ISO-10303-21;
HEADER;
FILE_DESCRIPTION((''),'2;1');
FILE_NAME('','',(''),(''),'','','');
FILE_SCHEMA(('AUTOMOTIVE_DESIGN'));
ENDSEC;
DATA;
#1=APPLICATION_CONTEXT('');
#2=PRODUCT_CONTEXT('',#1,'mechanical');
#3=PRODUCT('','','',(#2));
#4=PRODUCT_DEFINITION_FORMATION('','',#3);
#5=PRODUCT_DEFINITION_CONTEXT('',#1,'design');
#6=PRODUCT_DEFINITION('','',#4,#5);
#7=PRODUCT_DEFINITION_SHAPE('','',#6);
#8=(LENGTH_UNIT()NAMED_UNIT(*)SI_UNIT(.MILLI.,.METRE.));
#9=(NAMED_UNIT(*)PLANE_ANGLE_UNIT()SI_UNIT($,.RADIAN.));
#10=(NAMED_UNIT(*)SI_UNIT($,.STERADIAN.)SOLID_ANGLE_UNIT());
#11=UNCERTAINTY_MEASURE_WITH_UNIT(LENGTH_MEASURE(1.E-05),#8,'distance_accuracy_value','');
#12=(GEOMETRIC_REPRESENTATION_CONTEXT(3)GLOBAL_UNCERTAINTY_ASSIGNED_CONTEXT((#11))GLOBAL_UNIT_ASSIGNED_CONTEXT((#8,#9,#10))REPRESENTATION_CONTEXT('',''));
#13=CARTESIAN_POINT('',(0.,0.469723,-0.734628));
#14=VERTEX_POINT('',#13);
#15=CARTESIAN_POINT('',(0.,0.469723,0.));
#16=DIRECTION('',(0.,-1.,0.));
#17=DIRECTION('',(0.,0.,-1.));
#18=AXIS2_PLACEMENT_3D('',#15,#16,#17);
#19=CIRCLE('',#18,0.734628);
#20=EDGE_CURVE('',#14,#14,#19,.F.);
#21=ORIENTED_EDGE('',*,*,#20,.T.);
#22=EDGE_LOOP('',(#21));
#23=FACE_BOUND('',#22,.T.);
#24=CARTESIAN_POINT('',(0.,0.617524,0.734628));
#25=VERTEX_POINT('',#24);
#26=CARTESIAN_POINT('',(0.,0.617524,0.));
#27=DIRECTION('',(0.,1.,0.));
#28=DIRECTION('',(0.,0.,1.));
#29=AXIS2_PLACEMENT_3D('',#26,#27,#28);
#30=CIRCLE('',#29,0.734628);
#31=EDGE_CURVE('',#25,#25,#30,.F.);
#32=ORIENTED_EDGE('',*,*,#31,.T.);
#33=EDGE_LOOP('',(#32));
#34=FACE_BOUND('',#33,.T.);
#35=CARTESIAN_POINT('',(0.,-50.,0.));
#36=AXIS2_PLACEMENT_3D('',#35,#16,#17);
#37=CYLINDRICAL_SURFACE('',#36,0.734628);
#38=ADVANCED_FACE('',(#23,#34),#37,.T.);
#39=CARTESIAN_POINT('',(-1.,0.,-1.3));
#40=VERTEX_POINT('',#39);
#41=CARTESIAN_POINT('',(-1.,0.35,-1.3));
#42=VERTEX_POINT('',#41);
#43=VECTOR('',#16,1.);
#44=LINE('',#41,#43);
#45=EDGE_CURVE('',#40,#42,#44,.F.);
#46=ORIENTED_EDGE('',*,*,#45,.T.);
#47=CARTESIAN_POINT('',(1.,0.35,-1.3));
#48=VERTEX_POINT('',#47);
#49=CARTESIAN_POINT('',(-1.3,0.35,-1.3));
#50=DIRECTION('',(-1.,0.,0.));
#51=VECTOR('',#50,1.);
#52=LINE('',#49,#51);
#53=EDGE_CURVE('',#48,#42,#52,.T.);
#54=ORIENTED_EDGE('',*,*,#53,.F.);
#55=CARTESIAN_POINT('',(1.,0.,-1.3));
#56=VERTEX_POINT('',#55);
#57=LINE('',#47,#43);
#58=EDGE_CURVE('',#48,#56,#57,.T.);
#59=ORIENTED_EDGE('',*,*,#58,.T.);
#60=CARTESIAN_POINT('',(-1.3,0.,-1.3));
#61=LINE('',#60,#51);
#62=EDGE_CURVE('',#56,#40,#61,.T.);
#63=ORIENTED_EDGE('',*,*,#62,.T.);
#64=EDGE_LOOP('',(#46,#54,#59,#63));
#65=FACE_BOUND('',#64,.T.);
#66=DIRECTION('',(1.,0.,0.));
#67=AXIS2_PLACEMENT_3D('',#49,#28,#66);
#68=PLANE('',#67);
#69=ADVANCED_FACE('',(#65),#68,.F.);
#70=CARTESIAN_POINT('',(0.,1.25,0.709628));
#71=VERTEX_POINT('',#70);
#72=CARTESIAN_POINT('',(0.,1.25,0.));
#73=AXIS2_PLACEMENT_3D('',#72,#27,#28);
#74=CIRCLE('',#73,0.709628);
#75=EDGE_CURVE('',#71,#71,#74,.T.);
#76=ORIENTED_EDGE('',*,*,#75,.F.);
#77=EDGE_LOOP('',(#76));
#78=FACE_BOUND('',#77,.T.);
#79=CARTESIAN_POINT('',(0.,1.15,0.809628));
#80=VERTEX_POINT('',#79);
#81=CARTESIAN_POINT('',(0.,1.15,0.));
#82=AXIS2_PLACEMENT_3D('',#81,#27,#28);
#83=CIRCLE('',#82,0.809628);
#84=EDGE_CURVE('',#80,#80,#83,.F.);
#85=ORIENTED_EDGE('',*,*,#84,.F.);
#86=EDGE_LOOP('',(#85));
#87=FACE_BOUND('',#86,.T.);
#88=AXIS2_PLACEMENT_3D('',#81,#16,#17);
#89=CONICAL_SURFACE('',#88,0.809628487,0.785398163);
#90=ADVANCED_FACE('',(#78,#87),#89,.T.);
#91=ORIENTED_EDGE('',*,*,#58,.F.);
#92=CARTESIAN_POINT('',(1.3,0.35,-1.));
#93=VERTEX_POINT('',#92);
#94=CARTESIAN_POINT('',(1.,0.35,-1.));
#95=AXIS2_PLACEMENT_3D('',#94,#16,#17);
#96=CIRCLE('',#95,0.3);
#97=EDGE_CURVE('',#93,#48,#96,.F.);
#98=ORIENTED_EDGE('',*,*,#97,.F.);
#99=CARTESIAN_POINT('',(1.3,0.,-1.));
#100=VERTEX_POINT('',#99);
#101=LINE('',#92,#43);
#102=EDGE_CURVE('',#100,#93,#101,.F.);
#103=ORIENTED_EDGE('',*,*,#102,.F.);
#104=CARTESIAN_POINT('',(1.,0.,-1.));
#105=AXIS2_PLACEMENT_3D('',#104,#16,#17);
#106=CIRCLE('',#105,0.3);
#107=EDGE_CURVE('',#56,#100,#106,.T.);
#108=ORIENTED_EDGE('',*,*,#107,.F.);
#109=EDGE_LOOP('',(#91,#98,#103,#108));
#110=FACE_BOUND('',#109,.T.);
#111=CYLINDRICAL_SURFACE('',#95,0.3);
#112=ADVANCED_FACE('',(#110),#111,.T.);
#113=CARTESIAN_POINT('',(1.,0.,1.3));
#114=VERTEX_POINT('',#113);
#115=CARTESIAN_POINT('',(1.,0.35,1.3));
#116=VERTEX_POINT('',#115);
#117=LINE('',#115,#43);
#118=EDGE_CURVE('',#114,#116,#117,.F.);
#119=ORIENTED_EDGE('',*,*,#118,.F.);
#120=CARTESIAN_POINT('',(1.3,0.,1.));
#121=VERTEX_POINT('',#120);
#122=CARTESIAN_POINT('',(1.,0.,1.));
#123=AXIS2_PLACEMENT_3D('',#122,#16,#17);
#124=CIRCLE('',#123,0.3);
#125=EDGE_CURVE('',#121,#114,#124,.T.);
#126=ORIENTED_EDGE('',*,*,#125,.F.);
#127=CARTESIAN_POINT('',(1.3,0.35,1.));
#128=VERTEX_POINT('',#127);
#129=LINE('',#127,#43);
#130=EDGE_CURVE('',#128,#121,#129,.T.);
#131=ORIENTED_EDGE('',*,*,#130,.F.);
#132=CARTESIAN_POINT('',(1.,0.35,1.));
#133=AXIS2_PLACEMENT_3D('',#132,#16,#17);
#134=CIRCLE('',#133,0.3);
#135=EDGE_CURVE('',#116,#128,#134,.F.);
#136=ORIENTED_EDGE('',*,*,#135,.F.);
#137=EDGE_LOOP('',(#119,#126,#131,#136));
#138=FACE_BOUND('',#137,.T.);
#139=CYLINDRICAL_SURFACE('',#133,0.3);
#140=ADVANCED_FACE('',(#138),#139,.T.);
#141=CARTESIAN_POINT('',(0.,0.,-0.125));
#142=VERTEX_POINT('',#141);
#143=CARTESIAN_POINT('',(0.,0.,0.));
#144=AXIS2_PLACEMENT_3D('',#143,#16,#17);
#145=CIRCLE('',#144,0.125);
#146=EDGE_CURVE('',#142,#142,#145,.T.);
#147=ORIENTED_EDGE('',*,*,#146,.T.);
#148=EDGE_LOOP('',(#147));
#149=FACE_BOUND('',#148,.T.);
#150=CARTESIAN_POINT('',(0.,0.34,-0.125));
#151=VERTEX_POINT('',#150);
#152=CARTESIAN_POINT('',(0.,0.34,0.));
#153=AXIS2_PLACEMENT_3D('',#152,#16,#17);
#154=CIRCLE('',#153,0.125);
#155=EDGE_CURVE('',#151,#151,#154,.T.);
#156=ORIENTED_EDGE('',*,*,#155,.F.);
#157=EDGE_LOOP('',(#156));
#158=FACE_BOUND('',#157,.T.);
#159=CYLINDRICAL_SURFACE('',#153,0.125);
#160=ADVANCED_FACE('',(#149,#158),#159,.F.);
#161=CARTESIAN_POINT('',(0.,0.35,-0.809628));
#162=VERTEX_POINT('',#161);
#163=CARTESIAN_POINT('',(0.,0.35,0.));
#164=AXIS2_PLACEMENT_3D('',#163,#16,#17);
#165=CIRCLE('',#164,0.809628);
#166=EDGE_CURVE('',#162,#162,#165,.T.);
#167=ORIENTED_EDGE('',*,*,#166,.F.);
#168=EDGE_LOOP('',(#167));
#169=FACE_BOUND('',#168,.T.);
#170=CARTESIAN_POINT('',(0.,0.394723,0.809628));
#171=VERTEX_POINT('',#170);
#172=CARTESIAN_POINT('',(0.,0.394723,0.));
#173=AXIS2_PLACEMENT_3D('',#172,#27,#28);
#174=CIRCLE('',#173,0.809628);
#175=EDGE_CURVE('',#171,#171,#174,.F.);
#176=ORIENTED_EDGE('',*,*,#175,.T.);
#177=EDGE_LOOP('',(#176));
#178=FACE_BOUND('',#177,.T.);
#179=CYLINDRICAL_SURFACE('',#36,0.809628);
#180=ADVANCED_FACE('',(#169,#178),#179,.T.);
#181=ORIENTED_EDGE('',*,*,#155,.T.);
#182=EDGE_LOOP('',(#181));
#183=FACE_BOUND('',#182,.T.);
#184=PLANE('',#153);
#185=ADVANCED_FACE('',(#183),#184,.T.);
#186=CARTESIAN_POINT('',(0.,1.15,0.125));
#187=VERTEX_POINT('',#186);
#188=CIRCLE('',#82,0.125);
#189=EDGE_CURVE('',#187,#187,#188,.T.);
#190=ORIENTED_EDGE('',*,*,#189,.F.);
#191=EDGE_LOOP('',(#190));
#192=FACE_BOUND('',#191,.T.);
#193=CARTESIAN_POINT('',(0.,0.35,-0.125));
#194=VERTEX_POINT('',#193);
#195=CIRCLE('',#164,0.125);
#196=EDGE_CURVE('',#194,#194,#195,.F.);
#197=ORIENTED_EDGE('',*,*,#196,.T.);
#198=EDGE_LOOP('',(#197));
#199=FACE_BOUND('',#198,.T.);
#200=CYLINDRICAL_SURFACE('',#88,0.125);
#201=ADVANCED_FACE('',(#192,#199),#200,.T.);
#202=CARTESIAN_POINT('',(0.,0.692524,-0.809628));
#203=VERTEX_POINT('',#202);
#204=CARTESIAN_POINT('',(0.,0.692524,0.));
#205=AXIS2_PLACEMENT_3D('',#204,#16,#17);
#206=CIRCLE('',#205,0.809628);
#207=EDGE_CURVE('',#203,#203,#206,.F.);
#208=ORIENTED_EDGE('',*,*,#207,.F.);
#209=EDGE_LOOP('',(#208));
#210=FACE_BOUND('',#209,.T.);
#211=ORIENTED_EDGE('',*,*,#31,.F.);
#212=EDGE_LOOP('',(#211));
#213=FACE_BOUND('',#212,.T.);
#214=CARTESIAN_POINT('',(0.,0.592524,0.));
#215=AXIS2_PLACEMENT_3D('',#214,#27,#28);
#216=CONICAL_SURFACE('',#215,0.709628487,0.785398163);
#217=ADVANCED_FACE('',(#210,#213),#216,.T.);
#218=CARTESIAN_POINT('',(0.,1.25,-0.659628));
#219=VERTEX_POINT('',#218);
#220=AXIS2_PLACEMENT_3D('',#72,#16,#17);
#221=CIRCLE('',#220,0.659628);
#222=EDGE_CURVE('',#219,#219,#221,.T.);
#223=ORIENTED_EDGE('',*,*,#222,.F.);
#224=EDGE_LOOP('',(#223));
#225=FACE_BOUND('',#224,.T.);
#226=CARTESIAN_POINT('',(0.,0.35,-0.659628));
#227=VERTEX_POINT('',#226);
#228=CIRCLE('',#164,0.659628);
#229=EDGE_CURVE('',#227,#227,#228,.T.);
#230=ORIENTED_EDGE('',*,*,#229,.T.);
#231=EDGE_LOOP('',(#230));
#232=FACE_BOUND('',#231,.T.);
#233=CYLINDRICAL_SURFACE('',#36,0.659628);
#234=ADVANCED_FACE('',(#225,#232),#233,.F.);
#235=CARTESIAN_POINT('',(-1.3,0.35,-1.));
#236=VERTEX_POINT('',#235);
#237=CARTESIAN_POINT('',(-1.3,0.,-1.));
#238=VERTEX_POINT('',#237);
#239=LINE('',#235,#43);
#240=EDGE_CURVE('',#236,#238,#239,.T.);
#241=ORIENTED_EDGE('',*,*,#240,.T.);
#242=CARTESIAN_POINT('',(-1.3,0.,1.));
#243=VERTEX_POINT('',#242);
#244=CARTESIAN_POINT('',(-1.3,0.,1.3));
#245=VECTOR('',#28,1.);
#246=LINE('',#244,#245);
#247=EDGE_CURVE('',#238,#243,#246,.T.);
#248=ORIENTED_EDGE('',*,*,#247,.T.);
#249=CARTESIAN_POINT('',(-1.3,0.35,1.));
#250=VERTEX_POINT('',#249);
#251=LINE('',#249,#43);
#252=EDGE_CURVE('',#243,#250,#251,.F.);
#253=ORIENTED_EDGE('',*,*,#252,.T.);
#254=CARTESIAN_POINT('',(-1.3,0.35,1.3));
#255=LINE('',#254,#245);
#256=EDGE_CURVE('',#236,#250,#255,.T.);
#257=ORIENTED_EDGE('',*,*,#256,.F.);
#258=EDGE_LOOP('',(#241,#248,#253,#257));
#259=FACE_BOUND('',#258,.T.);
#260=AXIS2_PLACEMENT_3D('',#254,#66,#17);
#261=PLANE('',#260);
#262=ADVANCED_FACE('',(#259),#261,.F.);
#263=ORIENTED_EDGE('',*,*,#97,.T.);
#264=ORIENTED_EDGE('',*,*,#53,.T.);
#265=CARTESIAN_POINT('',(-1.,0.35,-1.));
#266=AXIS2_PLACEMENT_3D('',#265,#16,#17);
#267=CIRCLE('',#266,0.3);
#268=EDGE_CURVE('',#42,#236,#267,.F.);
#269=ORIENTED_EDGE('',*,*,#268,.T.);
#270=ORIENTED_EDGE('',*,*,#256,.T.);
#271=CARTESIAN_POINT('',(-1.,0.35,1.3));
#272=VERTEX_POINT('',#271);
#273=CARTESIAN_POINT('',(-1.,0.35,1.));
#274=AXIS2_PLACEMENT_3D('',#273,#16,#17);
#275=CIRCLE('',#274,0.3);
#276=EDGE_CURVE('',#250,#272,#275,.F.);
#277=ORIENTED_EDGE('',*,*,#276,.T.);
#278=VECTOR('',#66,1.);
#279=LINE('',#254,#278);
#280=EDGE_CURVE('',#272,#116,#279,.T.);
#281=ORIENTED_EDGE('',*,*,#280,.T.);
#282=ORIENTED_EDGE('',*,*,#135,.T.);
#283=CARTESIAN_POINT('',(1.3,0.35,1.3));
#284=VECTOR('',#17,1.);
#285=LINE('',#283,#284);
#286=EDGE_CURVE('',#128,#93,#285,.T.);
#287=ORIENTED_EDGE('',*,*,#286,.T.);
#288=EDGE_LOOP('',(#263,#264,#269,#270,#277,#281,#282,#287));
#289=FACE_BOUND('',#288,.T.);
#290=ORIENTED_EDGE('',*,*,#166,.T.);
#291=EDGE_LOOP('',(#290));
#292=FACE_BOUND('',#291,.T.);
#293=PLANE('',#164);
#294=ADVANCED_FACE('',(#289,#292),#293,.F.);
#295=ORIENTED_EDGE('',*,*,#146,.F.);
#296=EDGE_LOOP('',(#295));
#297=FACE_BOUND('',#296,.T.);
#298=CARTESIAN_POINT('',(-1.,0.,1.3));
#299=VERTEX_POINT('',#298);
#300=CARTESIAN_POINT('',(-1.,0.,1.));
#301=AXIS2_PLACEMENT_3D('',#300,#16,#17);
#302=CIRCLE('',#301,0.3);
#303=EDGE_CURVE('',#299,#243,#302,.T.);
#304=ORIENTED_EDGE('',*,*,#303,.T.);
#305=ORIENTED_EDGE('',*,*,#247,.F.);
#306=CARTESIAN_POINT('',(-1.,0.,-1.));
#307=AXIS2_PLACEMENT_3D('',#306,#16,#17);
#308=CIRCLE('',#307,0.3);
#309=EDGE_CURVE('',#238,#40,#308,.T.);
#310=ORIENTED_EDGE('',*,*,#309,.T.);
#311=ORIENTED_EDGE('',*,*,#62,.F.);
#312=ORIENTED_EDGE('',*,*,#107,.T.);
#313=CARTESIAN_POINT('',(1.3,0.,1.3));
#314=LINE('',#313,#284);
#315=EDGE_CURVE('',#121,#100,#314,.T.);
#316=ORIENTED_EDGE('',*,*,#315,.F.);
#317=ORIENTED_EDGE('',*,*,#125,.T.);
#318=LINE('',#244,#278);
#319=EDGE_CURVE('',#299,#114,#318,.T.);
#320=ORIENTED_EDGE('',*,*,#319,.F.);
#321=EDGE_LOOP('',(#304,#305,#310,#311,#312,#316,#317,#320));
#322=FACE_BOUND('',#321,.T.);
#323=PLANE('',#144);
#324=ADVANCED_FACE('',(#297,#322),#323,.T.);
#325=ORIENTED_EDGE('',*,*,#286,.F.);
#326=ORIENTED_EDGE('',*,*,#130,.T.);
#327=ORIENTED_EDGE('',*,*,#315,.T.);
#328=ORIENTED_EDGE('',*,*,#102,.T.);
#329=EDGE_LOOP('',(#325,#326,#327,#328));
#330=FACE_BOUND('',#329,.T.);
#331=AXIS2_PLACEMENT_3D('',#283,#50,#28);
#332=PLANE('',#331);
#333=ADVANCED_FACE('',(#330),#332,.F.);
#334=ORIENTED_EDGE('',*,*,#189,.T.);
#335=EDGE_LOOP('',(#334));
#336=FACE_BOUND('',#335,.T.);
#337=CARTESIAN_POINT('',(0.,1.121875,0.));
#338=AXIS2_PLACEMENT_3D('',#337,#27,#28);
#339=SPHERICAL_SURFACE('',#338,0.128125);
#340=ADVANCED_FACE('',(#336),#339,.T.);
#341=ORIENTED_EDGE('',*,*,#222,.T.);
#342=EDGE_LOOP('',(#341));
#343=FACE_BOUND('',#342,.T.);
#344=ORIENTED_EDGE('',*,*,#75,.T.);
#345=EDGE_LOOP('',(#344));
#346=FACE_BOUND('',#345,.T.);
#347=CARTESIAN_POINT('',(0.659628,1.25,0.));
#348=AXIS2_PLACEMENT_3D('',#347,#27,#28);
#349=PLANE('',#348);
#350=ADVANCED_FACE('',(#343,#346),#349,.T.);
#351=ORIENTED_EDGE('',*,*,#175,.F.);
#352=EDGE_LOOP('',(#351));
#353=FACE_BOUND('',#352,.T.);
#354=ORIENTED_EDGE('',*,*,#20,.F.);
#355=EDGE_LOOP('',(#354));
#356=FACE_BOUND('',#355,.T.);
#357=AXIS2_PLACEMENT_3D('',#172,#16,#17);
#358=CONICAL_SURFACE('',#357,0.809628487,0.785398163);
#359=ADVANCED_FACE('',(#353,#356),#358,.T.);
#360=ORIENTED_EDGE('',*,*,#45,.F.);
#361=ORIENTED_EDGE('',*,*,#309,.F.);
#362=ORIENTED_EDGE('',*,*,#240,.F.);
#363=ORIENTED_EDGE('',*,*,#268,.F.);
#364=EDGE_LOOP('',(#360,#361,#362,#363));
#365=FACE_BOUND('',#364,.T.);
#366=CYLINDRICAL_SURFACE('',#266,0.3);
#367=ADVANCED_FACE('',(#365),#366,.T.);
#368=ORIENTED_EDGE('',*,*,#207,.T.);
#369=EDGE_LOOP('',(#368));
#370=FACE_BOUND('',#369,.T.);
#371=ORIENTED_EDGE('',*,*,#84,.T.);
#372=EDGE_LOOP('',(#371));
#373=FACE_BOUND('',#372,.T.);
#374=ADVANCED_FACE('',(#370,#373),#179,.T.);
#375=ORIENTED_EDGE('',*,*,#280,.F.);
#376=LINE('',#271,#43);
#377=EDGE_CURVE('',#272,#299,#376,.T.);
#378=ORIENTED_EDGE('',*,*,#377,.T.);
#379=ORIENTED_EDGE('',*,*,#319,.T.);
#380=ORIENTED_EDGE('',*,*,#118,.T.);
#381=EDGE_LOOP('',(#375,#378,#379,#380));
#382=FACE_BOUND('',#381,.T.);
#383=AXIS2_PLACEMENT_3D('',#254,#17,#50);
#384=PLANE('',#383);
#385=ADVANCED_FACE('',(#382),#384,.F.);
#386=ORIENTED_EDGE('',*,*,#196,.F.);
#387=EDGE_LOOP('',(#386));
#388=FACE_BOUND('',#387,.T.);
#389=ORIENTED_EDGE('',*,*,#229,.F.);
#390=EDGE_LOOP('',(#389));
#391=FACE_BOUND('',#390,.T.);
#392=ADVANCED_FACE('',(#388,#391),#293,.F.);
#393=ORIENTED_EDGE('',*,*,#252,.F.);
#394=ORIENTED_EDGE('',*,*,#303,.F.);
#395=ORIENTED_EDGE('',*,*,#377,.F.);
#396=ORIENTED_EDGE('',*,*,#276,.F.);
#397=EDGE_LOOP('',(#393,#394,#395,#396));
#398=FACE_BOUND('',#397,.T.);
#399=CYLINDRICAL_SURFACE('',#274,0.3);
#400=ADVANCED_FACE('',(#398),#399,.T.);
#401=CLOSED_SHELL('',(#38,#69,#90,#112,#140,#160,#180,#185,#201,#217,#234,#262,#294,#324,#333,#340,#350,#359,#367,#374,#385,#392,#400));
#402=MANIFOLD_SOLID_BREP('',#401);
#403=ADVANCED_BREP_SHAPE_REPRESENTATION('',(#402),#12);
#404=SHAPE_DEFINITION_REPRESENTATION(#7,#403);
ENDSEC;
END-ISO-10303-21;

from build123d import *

# Parameters (mm, degrees)
SKETCH1_W           = 2.6
SKETCH1_H           = 2.6
BOSS_EXTRUDE1_DEPTH = 0.35
FILLET1_R           = 0.3
CHAMFER1_SIZE       = 0.1
CHAMFER2_SIZE       = 0.1
SKETCH4_R           = 0.125
BOSS_EXTRUDE2_DEPTH = 0.8
DOME1_FACE_RADIUS   = 0.125
DOME1_HEIGHT        = 0.1
SKETCH5_R           = 0.125
CUT_EXTRUDE2_DEPTH  = 0.34


with BuildPart() as part:
    # Sketch1 → Boss-Extrude1 (new body)
    with BuildSketch(Plane(origin=(0, 0, 0), x_dir=(1, 0, 0), z_dir=(0, 1, 0))):
        Rectangle(SKETCH1_W, SKETCH1_H)
    extrude(amount=BOSS_EXTRUDE1_DEPTH)

    # Fillet1
    fillet1_edges = [part.edges().sort_by_distance(p)[0] for p in [
        (1.3, 0.175, 1.3),
        (-1.3, 0.175, 1.3),
        (-1.3, 0.175, -1.3),
        (1.3, 0.175, -1.3),
    ]]
    fillet(fillet1_edges, radius=FILLET1_R)

    # Sketch3 → Revolve1 (revolve)
    with BuildSketch(Plane.XY, mode=Mode.PRIVATE) as revolve1_sk:
        Polygon((0.659628487, 0.35), (0.659628487, 1.25), (0.809628487, 1.25), (0.809628487, 0.592524264), (0.734628487, 0.592524264), (0.734628487, 0.494723207), (0.809628487, 0.494723207), (0.809628487, 0.35), align=None)
    revolve(revolve1_sk.sketch.rotate(Axis((0, -50, 0), (0, 1, 0)), 90), axis=Axis((0, -50, 0), (0, 1, 0)))

    # Chamfer1
    chamfer1_edges = [part.edges().sort_by_distance(p)[0] for p in [
        (0, 1.25, 0.809628487),
    ]]
    chamfer(chamfer1_edges, length=CHAMFER1_SIZE)

    # Chamfer2
    # the kernel refuses this chamfer: 0.1 mm, written as the material it takes off along each edge
    with BuildSketch(Plane(origin=(0, 0.494723207, 0), x_dir=(0, 0, -1), z_dir=(1, 0, 0))) as chamfer2_piece_1_section:
        Polygon((0.809628487 - CHAMFER2_SIZE, 0), (0.809628487, -CHAMFER2_SIZE), (0.809628487, 0), align=None)
    chamfer2_piece_1 = revolve(axis=Axis((0, 0.494723207, 0), (0, 1, 0)), mode=Mode.PRIVATE)
    chamfer2_piece_1 = chamfer2_piece_1 - Plane(origin=(0, 0.43287552, 0), x_dir=(0, 0, -1), z_dir=(0, -1, 0)) * Cylinder(0.734628487, 4, mode=Mode.PRIVATE)
    add(chamfer2_piece_1, mode=Mode.SUBTRACT)
    with BuildSketch(Plane(origin=(0, 0.592524264, 0), x_dir=(0, 0, -1), z_dir=(1, 0, 0))) as chamfer2_piece_2_section:
        Polygon((0.809628487, CHAMFER2_SIZE), (0.809628487 - CHAMFER2_SIZE, 0), (0.809628487, 0), align=None)
    chamfer2_piece_2 = revolve(axis=Axis((0, 0.592524264, 0), (0, 1, 0)), mode=Mode.PRIVATE)
    chamfer2_piece_2 = chamfer2_piece_2 - Plane(origin=(0, 0.65437195, 0), x_dir=(0, 0, -1), z_dir=(0, -1, 0)) * Cylinder(0.734628487, 4, mode=Mode.PRIVATE)
    add(chamfer2_piece_2, mode=Mode.SUBTRACT)

    # Sketch4 → Boss-Extrude2 (add)
    with BuildSketch(Plane(origin=(0, 0.35, 0), x_dir=(1, 0, 0), z_dir=(0, 1, 0))):
        with Locations(Location((0, 0, 0), (0, 0, 90))):
            Circle(SKETCH4_R)
    extrude(amount=BOSS_EXTRUDE2_DEPTH)

    # Dome1: a dome of height H over a round flat face of radius A is a cap of a sphere of radius (A * A + H * H) / (2 * H)
    dome1_r = (DOME1_FACE_RADIUS * DOME1_FACE_RADIUS + DOME1_HEIGHT * DOME1_HEIGHT) / (2 * DOME1_HEIGHT)
    dome1_base = Plane((0, 1.15, 0), z_dir=(0, 1, 0))
    with Locations(dome1_base.offset(DOME1_HEIGHT - dome1_r)):
        dome1_ball = Sphere(dome1_r, mode=Mode.PRIVATE)
    add(split(dome1_ball, bisect_by=dome1_base, keep=Keep.TOP, mode=Mode.PRIVATE))

    # Sketch5 → Cut-Extrude2 (cut)
    with BuildSketch(Plane.XZ):
        with Locations(Location((0, 0, 0), (0, 0, 270))):
            Circle(SKETCH5_R)
    extrude(amount=-CUT_EXTRUDE2_DEPTH, mode=Mode.SUBTRACT)


solid = part.part
